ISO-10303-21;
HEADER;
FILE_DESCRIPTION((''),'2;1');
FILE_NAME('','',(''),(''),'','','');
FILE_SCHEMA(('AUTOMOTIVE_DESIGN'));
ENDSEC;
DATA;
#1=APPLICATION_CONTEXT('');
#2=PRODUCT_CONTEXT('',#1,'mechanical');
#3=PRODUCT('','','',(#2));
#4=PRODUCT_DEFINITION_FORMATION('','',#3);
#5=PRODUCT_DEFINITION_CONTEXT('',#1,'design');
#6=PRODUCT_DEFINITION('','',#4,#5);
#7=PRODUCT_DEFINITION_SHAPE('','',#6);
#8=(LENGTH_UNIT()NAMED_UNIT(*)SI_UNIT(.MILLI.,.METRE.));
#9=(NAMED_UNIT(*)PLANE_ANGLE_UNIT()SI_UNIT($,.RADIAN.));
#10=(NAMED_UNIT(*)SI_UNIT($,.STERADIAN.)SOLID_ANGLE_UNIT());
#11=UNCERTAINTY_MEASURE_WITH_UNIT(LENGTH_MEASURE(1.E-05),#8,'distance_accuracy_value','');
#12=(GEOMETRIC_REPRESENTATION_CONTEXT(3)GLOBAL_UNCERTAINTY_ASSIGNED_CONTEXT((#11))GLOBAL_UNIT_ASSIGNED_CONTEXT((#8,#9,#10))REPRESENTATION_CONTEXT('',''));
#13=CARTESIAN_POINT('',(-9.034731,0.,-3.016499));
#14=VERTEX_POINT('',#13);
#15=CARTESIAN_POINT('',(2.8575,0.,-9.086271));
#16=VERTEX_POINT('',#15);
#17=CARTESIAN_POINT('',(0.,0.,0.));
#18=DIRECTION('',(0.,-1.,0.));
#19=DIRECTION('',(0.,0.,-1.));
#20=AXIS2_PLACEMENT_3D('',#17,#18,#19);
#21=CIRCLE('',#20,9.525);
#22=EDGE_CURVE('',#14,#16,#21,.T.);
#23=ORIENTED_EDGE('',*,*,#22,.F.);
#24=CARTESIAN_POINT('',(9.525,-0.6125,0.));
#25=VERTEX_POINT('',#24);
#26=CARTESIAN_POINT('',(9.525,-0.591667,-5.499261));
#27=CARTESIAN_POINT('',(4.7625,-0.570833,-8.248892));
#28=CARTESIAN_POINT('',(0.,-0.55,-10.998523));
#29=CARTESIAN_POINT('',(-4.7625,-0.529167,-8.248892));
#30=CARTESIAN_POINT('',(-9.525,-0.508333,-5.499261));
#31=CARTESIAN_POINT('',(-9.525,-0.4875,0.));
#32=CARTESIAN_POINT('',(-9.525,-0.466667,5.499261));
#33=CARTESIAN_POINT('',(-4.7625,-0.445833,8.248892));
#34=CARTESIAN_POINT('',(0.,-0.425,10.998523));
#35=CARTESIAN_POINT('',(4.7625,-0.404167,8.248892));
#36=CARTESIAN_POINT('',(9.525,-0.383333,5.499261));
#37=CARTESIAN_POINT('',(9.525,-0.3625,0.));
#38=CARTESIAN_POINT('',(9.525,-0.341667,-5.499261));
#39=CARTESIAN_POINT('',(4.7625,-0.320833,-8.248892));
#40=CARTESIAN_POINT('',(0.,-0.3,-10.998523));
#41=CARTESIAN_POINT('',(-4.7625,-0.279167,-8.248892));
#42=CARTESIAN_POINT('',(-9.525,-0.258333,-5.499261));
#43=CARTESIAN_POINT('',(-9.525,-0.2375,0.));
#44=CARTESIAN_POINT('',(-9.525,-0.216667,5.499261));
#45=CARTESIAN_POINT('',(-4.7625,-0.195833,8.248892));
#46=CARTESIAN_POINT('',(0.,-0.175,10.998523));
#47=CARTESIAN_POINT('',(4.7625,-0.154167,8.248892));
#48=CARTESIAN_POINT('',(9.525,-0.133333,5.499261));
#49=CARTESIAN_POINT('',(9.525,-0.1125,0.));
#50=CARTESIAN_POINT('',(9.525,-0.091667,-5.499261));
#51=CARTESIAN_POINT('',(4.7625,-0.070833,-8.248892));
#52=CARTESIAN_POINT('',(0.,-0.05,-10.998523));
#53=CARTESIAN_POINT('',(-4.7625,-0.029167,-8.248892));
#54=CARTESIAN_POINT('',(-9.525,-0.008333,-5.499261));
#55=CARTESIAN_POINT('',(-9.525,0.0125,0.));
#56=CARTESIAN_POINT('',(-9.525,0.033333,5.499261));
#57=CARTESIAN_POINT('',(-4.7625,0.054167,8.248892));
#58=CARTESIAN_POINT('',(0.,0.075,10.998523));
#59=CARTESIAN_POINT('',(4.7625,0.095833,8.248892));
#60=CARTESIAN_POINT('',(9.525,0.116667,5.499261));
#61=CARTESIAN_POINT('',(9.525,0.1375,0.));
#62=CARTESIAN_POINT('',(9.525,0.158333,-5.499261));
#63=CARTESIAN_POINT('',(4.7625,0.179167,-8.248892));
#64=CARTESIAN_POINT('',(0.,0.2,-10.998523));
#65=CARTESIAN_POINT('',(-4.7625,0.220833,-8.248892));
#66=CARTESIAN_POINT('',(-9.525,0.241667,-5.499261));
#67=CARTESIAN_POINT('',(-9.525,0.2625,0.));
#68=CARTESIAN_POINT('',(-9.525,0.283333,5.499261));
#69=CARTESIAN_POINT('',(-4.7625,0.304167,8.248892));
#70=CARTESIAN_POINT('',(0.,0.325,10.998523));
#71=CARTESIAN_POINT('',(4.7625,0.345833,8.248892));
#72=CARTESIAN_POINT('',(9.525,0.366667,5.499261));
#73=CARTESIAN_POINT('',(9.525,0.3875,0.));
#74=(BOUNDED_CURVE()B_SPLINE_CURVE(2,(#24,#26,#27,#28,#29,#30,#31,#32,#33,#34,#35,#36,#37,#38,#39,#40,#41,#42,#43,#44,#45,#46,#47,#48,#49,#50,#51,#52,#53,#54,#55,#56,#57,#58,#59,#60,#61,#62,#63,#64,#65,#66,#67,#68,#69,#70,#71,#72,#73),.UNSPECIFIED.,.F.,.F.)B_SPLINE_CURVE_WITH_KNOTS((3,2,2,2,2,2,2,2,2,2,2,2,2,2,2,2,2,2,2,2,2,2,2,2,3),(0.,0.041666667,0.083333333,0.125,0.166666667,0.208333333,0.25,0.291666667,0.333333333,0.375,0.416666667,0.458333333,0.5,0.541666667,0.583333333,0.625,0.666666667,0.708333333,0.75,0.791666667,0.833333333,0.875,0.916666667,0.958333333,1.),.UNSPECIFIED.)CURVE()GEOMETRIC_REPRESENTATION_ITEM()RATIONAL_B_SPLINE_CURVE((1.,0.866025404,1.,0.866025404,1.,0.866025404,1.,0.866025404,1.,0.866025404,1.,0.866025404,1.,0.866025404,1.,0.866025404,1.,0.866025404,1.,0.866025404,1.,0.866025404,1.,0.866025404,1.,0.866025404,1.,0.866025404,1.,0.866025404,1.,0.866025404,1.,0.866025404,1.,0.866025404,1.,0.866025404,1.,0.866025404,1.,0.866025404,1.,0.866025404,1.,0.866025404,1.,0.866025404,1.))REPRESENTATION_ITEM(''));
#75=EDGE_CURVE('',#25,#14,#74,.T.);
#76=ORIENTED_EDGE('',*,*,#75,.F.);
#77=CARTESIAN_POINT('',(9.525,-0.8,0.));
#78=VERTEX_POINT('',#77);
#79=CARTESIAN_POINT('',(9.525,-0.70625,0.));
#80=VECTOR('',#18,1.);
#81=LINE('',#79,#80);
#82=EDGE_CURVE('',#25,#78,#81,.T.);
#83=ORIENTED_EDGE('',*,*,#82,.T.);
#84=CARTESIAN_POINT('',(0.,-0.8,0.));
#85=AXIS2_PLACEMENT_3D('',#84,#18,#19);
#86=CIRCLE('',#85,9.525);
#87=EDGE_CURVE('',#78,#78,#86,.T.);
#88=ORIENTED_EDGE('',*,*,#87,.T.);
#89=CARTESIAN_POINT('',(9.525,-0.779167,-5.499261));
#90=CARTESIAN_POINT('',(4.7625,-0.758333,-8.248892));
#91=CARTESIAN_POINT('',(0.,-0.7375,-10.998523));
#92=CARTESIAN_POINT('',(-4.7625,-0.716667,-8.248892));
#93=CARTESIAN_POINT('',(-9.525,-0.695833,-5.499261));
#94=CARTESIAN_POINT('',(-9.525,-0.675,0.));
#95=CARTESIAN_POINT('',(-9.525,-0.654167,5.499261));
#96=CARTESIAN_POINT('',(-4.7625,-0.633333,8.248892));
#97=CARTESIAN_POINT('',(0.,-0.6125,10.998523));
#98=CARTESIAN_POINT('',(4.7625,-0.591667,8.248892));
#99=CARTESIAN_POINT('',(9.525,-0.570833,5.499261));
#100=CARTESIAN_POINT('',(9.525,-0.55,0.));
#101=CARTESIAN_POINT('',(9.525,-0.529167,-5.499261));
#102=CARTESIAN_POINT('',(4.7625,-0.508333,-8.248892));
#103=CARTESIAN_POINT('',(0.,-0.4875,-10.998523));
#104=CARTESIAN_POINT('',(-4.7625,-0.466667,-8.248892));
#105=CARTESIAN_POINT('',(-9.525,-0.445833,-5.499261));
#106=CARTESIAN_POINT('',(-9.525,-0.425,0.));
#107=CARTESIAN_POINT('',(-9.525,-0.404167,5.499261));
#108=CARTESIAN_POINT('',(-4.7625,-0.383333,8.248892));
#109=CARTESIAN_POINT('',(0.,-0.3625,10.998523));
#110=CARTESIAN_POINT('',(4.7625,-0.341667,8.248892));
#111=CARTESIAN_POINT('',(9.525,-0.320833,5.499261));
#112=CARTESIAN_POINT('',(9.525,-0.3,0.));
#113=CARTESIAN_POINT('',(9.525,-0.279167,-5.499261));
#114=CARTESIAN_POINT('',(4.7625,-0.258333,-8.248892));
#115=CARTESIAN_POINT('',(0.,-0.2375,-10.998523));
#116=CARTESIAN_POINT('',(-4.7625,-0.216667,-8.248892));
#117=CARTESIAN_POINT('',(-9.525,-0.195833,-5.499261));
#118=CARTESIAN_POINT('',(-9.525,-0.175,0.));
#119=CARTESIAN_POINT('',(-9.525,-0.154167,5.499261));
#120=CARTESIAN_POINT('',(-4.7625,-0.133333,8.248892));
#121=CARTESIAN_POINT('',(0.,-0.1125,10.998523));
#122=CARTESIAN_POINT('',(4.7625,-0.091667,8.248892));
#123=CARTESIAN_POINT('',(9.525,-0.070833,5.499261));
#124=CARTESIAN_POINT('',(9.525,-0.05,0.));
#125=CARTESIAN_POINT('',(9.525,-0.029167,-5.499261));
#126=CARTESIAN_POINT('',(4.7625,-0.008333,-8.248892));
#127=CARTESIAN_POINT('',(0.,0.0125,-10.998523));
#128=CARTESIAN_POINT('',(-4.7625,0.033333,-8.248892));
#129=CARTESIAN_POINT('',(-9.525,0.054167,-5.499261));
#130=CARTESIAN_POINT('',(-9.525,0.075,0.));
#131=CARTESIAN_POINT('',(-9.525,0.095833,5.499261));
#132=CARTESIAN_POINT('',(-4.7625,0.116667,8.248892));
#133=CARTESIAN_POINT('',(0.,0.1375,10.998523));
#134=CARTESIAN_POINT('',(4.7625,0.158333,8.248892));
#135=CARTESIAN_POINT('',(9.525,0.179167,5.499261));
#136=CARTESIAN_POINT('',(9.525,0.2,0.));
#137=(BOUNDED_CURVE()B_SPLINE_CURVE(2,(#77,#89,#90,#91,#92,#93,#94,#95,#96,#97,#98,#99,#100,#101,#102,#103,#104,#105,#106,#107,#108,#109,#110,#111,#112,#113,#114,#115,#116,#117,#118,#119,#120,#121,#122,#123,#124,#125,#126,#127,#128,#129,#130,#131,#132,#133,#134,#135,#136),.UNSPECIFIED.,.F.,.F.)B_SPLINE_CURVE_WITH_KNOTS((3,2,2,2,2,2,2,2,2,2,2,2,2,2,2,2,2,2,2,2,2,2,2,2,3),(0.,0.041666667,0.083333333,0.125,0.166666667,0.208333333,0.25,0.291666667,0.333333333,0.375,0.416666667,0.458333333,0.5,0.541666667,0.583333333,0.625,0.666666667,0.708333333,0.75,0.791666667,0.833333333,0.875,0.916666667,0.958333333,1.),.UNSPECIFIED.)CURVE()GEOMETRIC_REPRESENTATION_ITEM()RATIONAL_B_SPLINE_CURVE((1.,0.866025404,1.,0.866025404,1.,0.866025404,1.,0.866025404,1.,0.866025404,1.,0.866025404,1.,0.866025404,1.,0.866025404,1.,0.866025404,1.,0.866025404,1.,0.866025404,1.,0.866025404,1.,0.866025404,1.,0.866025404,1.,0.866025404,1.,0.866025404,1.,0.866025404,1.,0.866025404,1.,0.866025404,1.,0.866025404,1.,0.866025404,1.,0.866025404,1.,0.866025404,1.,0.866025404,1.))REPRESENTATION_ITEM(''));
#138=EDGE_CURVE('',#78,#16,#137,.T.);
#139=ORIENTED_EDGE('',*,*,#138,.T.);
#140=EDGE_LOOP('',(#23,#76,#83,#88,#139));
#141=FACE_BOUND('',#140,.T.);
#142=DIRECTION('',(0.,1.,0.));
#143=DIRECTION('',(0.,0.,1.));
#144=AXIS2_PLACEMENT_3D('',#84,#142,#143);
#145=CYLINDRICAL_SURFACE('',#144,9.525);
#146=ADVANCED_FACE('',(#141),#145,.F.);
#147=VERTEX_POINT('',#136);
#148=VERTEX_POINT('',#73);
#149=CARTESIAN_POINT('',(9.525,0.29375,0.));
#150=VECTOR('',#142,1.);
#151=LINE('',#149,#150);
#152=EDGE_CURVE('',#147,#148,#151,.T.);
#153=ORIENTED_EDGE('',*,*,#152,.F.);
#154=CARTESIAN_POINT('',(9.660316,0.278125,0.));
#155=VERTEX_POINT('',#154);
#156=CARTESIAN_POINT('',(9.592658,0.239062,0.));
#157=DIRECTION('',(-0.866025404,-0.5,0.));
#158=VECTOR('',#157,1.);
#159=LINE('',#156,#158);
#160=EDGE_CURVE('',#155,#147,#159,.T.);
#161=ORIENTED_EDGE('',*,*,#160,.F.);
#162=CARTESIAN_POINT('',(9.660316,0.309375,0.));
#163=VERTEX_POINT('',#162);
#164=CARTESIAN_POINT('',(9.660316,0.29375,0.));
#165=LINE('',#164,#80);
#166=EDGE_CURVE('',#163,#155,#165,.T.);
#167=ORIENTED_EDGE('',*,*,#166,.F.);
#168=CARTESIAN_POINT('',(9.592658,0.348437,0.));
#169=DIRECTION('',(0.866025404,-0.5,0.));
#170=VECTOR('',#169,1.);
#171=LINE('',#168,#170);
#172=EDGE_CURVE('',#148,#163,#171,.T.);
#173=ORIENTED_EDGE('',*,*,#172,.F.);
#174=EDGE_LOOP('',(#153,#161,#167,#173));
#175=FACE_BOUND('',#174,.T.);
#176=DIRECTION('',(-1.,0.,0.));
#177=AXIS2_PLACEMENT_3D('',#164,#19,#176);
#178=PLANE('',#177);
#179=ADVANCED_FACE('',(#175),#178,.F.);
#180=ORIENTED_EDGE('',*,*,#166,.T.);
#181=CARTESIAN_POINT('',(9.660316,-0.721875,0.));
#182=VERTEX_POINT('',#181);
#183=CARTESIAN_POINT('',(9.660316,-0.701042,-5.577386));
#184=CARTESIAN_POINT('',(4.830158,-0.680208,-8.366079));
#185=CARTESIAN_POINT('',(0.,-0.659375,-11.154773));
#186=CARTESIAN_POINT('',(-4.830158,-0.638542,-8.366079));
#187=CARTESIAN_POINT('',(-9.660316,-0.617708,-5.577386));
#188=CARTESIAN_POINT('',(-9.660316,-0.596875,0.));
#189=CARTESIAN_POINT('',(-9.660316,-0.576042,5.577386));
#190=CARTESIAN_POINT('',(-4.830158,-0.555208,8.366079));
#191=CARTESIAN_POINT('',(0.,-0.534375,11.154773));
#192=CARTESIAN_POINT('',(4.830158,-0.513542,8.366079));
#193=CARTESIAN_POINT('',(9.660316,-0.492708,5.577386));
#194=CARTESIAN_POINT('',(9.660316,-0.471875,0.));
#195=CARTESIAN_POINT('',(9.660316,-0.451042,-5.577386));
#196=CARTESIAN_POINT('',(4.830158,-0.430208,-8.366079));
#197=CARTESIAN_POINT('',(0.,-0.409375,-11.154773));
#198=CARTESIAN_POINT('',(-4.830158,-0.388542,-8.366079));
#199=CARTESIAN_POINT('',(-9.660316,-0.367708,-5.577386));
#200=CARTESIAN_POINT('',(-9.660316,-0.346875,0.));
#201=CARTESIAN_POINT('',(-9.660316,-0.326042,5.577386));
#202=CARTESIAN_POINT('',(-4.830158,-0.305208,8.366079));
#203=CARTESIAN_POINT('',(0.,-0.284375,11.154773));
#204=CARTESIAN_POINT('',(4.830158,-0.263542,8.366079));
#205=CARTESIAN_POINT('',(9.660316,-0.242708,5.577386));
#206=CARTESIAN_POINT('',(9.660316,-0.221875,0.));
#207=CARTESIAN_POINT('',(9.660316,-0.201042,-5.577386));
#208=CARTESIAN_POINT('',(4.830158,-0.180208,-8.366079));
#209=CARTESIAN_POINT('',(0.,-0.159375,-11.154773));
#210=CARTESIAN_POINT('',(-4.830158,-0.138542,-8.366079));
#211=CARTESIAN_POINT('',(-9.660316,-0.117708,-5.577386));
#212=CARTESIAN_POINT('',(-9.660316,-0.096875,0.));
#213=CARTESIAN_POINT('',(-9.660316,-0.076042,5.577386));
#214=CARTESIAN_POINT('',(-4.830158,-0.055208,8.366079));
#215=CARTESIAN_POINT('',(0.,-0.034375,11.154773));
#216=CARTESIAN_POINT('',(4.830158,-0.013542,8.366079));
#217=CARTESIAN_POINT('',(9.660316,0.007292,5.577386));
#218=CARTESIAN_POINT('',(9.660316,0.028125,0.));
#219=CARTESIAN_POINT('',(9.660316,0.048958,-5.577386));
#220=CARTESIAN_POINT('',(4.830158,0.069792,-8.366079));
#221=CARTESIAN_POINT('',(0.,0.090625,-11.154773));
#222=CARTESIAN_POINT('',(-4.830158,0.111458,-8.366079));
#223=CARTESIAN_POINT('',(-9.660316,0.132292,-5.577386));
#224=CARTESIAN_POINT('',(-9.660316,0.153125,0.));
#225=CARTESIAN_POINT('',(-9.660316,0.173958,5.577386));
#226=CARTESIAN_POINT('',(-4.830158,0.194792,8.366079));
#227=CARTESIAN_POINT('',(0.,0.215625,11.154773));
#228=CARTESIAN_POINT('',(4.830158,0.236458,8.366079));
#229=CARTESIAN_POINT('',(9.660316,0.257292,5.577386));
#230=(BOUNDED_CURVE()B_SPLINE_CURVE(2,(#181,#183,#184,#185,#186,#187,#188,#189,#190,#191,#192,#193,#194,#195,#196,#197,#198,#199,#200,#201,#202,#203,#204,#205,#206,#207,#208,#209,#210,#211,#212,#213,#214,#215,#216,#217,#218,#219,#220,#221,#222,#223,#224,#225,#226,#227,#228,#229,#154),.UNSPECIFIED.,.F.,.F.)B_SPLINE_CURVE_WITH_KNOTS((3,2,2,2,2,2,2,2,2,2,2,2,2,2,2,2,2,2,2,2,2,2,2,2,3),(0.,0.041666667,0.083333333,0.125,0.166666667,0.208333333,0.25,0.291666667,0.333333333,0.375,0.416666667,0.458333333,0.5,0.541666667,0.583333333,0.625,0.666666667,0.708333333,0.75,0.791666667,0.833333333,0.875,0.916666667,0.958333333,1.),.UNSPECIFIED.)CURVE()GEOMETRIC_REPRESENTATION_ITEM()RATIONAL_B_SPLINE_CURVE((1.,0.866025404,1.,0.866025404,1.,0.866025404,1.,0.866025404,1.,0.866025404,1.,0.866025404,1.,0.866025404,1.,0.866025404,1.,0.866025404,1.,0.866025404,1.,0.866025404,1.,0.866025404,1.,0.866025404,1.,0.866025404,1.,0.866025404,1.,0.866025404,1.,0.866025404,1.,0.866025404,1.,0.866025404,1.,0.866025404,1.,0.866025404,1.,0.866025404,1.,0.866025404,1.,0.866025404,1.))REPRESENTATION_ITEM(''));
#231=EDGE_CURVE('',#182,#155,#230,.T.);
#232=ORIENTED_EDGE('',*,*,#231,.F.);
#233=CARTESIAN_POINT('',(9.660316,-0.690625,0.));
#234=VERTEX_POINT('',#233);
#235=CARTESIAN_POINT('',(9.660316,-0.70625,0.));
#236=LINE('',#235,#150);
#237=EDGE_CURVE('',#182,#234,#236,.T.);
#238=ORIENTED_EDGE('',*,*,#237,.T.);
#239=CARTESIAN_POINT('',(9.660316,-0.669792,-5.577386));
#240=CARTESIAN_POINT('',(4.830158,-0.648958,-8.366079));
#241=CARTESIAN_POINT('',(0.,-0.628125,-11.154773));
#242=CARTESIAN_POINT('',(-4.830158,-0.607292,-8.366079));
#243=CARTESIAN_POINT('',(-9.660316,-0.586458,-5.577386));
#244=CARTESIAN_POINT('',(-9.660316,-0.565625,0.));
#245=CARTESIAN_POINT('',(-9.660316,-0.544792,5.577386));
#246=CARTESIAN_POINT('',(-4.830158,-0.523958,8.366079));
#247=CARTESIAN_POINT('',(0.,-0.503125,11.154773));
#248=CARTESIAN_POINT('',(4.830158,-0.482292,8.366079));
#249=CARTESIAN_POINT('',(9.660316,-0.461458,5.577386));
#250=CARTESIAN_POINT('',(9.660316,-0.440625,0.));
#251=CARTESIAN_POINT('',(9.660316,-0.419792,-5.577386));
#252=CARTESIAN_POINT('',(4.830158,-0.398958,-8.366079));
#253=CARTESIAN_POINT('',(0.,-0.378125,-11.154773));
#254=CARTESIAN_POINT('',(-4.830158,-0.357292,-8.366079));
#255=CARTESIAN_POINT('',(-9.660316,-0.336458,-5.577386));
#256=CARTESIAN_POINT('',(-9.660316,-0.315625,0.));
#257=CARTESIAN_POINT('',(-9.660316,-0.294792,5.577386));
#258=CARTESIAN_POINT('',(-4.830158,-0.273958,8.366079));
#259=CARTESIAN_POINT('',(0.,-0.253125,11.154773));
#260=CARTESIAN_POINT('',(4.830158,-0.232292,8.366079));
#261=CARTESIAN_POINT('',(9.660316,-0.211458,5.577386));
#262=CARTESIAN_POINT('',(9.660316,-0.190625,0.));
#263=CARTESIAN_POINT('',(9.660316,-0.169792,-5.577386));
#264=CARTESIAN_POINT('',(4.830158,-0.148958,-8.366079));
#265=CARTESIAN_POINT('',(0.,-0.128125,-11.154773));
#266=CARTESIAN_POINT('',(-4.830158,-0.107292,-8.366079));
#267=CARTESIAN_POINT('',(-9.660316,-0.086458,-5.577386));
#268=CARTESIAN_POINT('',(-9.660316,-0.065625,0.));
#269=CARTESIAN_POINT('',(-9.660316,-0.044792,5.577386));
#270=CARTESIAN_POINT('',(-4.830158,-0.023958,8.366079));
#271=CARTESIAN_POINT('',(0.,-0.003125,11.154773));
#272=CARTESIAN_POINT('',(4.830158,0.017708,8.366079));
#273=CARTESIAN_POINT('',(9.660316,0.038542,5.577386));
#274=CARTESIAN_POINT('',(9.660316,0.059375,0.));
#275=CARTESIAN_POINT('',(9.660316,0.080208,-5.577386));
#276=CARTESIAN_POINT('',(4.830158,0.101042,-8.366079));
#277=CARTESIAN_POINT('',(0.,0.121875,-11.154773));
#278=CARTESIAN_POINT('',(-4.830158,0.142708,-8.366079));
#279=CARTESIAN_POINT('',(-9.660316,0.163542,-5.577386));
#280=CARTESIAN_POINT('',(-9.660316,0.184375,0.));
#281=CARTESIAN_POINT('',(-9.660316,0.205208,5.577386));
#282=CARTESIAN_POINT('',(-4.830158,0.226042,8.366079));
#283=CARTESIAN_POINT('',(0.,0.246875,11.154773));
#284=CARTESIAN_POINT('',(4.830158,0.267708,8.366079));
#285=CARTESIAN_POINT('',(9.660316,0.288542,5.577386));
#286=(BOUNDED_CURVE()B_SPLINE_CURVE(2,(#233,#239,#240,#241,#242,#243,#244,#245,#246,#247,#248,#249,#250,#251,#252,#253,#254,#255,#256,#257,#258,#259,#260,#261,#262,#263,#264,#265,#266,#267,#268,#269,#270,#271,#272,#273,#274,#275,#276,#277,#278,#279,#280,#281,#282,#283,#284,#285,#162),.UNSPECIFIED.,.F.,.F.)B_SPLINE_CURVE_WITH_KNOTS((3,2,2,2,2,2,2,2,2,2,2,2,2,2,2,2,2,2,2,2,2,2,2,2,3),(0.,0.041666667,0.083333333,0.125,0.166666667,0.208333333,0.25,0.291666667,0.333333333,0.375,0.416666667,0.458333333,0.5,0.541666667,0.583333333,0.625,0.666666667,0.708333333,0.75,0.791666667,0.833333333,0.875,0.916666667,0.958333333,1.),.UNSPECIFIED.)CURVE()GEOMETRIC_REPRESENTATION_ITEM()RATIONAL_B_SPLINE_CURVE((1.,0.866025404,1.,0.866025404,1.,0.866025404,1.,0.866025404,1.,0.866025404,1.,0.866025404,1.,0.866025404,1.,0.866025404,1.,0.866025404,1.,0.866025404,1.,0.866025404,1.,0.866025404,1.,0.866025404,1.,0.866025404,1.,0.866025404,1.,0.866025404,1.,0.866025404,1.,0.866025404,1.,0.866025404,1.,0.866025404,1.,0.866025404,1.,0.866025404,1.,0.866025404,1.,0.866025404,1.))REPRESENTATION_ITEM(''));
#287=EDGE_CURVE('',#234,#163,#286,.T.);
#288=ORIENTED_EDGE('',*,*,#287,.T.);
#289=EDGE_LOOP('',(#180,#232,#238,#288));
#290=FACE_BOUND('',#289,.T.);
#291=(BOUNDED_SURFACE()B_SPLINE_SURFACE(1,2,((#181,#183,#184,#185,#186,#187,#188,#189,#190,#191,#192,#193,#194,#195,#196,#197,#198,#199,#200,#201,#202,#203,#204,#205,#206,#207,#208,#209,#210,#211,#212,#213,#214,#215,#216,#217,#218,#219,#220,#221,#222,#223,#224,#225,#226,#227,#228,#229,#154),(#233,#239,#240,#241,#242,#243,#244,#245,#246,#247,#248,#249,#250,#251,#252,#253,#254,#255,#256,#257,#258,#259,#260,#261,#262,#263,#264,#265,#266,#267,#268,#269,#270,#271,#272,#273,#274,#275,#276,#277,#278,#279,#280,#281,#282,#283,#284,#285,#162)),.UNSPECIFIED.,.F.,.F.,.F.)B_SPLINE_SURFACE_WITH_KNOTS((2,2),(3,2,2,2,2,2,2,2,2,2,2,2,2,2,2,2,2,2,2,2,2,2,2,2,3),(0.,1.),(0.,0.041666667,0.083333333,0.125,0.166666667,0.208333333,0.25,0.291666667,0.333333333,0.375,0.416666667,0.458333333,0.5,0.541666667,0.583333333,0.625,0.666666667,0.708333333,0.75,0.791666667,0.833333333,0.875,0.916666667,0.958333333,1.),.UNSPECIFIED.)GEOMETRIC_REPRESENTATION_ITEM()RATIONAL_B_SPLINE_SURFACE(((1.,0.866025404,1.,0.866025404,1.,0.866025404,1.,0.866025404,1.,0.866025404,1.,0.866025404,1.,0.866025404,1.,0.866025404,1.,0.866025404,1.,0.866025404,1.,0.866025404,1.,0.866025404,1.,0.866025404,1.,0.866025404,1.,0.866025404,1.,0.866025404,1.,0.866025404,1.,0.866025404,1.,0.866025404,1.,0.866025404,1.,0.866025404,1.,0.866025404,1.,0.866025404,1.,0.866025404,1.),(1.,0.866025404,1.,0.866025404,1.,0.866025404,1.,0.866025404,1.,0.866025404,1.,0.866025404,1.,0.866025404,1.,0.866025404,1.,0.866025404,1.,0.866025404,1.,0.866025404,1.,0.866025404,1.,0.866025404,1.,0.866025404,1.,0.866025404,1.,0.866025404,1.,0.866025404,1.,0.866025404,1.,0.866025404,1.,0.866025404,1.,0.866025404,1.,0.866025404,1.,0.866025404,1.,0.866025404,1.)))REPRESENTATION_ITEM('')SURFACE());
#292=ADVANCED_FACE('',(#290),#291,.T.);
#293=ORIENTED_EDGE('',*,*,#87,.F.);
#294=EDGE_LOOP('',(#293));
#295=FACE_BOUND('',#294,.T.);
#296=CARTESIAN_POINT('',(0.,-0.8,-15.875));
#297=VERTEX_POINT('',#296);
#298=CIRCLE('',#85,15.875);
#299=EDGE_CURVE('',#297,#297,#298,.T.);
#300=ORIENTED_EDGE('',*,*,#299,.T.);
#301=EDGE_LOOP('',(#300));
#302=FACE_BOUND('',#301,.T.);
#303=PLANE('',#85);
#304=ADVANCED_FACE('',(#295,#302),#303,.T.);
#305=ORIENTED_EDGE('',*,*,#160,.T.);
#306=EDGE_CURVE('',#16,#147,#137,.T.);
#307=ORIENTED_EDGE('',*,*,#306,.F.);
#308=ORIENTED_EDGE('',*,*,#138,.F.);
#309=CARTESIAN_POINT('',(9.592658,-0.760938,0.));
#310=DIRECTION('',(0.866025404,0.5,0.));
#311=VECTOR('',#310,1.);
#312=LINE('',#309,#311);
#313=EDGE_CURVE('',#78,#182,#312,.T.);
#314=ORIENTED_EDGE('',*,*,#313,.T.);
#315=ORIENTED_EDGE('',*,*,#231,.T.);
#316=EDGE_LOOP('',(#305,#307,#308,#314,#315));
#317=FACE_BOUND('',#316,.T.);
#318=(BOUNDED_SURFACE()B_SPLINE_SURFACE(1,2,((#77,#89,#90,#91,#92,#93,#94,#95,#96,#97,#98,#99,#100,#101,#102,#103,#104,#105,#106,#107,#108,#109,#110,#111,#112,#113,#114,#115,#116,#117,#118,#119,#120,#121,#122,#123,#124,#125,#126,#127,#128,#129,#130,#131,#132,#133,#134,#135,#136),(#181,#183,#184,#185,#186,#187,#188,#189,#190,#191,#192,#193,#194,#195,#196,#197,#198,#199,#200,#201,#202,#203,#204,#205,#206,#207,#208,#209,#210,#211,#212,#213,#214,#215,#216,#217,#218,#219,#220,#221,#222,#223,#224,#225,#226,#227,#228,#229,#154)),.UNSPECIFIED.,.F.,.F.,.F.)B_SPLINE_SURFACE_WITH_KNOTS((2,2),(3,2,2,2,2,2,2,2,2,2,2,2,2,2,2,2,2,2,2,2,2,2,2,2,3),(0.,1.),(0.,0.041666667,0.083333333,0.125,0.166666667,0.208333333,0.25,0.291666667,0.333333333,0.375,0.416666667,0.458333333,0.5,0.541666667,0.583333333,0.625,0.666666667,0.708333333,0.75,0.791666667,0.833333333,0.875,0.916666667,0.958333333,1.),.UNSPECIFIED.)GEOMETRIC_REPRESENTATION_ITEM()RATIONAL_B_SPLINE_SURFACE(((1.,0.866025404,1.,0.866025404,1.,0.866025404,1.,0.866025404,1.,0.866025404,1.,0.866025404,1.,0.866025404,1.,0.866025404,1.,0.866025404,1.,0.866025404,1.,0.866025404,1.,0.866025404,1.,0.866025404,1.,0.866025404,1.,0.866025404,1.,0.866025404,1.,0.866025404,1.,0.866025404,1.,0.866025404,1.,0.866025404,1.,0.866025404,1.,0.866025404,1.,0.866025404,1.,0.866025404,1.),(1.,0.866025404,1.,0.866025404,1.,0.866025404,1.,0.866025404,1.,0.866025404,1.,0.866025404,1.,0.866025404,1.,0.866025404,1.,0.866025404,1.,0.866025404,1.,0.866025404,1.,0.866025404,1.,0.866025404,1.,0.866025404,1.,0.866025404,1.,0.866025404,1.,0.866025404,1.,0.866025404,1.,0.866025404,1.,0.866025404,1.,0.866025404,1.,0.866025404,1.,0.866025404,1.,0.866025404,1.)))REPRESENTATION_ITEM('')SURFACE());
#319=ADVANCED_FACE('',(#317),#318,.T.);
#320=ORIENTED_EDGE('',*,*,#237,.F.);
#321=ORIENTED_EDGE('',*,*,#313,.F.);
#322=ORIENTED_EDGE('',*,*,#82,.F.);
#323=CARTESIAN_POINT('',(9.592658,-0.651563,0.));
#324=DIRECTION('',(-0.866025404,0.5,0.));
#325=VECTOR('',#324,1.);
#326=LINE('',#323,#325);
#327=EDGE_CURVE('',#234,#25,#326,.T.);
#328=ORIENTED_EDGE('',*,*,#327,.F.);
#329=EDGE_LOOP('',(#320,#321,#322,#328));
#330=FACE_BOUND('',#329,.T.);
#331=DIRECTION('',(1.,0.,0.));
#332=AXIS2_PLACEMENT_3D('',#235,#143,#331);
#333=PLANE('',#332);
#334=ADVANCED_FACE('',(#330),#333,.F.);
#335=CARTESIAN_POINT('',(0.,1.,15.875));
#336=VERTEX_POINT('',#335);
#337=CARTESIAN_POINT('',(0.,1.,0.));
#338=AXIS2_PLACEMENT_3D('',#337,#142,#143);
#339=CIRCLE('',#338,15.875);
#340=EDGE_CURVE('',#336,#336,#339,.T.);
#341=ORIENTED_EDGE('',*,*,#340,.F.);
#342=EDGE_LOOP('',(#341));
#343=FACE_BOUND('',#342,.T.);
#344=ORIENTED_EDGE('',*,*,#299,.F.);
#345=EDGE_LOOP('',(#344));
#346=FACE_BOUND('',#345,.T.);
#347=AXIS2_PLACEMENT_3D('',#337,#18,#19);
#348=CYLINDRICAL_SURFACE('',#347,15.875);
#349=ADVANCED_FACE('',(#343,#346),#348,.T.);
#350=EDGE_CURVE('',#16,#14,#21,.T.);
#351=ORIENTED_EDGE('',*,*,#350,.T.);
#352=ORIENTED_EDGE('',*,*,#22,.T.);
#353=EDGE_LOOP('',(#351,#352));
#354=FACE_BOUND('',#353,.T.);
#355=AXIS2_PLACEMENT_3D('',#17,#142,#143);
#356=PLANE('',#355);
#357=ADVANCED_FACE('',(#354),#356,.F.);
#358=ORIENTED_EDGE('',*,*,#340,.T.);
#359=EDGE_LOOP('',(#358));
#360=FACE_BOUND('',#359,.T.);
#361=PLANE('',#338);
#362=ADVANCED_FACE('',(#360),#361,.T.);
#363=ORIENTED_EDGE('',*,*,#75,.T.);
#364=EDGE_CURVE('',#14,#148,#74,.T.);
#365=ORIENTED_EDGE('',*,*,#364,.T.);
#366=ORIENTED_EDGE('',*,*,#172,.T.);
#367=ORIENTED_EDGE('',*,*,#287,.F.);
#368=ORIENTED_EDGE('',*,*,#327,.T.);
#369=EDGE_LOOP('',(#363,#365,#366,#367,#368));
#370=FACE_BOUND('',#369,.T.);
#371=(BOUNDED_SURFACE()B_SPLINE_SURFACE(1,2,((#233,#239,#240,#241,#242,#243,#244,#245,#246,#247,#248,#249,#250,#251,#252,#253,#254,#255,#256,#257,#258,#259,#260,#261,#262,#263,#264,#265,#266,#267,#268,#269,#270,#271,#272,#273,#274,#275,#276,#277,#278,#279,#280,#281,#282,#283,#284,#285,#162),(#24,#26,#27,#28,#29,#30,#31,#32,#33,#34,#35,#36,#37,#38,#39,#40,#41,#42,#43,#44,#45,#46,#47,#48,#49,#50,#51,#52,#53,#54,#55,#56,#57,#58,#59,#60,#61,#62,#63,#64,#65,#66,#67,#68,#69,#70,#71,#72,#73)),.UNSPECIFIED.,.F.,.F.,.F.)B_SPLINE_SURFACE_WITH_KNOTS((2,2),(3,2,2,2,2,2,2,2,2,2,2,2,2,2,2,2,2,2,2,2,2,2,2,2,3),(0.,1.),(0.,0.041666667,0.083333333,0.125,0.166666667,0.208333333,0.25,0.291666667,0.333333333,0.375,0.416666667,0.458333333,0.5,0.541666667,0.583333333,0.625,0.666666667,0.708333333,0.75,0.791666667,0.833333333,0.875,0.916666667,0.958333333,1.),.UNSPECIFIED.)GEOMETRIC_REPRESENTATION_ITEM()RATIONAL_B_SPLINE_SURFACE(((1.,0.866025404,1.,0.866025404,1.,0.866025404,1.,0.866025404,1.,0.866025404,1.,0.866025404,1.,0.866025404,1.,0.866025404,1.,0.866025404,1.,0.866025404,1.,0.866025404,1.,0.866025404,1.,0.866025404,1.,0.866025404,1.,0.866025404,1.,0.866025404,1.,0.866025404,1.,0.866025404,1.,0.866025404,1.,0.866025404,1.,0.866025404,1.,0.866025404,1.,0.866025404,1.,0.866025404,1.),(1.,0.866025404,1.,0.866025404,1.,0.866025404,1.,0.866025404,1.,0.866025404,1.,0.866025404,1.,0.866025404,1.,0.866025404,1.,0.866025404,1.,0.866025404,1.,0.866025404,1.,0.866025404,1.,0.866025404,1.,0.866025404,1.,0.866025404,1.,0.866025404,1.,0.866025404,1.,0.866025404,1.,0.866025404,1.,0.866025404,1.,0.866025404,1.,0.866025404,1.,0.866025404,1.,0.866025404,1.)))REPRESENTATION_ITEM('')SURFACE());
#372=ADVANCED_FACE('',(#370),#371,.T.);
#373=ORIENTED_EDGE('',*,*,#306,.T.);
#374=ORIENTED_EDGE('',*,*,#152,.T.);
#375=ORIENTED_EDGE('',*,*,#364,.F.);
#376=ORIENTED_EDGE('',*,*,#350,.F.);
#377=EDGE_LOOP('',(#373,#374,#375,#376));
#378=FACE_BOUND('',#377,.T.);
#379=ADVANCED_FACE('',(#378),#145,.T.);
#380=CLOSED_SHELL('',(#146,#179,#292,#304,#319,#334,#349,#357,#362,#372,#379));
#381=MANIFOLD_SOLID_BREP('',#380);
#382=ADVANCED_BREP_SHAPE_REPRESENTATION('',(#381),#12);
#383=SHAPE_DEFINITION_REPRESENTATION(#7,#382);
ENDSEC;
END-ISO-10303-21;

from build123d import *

# Parameters (mm, degrees)
SKETCH1_R           = 15.875
BOSS_EXTRUDE1_DEPTH = 1
BOSS_EXTRUDE2_START = 0.8
SKETCH2_R           = 15.875
SKETCH2_R_2         = 9.525
BOSS_EXTRUDE2_DEPTH = 0.8
THREAD1_PITCH       = 0.25


with BuildPart() as part:
    # Sketch1 → Boss-Extrude1 (new body)
    with BuildSketch(Plane(origin=(0, 0, 0), x_dir=(1, 0, 0), z_dir=(0, 1, 0))):
        with Locations(Location((0, 0, 0), (0, 0, 270))):
            Circle(SKETCH1_R)
    extrude(amount=BOSS_EXTRUDE1_DEPTH)

    # Sketch2 → Boss-Extrude2 (add)
    with BuildSketch(Plane.XZ.offset(BOSS_EXTRUDE2_START)):
        with Locations(Location((0, 0, 0), (0, 0, 270))):
            Circle(SKETCH2_R)
        with Locations(Location((0, 0, 0), (0, 0, 270))):
            Circle(SKETCH2_R_2, mode=Mode.SUBTRACT)
    extrude(amount=-BOSS_EXTRUDE2_DEPTH)

    # Thread1: the profile of Thread Profile1 profile screwed along a right-hand helix of 4 turns, 6 arcs to a turn; built about Z, then put on its axis
    thread1_z = Axis((0, 0, 0), (0, 0, 1))
    thread1_corners = [(9.5247, 0, -0.000173205), (9.660316469, 0, 0.078125), (9.660316469, 0, 0.109375), (9.5247, 0, 0.187673204)]
    with BuildLine(mode=Mode.PRIVATE) as thread1_profile:
        Line(thread1_corners[0], thread1_corners[1])
        Line(thread1_corners[1], thread1_corners[2])
        Line(thread1_corners[2], thread1_corners[3])
        Line(thread1_corners[3], thread1_corners[0])
    thread1_cap = Face(thread1_profile.wire())
    thread1_turn_angles = [0, 30, 60, 90, 120, 150, 180, 210, 240, 270, 300, 330, 360]
    thread1_turn_weights = [1, 0.8660254037844387, 1, 0.8660254037844387, 1, 0.8660254037844387, 1, 0.8660254037844387, 1, 0.8660254037844387, 1, 0.8660254037844387, 1]
    thread1_turn_rails = [Edge.make_bspline([Vector(p[0], p[1], 0).rotate(thread1_z, thread1_turn_angles[k]) / thread1_turn_weights[k] + Vector(0, 0, p[2] + THREAD1_PITCH * thread1_turn_angles[k] / 360) for k in range(13)], [0, 0, 0, 1, 1, 2, 2, 3, 3, 4, 4, 5, 5, 6, 6, 6], 2, thread1_turn_weights) for p in thread1_corners]
    thread1_turn_sides = [Face.make_surface_from_curves(thread1_turn_rails[p[0]], thread1_turn_rails[p[1]]) for p in [(0, 1), (1, 2), (2, 3), (3, 0)]]
    thread1 = Plane(origin=(0, -0.8, 0), x_dir=(1, 0, 0), z_dir=(0, 1, 0)) * Solid(Shell([*[p.moved(Location((0, 0, THREAD1_PITCH * i))) for i in range(4) for p in thread1_turn_sides], thread1_cap, thread1_cap.rotate(thread1_z, 1440).moved(Location((0, 0, THREAD1_PITCH * 1440 / 360)))]))
    add(thread1, mode=Mode.SUBTRACT)


solid = part.part
